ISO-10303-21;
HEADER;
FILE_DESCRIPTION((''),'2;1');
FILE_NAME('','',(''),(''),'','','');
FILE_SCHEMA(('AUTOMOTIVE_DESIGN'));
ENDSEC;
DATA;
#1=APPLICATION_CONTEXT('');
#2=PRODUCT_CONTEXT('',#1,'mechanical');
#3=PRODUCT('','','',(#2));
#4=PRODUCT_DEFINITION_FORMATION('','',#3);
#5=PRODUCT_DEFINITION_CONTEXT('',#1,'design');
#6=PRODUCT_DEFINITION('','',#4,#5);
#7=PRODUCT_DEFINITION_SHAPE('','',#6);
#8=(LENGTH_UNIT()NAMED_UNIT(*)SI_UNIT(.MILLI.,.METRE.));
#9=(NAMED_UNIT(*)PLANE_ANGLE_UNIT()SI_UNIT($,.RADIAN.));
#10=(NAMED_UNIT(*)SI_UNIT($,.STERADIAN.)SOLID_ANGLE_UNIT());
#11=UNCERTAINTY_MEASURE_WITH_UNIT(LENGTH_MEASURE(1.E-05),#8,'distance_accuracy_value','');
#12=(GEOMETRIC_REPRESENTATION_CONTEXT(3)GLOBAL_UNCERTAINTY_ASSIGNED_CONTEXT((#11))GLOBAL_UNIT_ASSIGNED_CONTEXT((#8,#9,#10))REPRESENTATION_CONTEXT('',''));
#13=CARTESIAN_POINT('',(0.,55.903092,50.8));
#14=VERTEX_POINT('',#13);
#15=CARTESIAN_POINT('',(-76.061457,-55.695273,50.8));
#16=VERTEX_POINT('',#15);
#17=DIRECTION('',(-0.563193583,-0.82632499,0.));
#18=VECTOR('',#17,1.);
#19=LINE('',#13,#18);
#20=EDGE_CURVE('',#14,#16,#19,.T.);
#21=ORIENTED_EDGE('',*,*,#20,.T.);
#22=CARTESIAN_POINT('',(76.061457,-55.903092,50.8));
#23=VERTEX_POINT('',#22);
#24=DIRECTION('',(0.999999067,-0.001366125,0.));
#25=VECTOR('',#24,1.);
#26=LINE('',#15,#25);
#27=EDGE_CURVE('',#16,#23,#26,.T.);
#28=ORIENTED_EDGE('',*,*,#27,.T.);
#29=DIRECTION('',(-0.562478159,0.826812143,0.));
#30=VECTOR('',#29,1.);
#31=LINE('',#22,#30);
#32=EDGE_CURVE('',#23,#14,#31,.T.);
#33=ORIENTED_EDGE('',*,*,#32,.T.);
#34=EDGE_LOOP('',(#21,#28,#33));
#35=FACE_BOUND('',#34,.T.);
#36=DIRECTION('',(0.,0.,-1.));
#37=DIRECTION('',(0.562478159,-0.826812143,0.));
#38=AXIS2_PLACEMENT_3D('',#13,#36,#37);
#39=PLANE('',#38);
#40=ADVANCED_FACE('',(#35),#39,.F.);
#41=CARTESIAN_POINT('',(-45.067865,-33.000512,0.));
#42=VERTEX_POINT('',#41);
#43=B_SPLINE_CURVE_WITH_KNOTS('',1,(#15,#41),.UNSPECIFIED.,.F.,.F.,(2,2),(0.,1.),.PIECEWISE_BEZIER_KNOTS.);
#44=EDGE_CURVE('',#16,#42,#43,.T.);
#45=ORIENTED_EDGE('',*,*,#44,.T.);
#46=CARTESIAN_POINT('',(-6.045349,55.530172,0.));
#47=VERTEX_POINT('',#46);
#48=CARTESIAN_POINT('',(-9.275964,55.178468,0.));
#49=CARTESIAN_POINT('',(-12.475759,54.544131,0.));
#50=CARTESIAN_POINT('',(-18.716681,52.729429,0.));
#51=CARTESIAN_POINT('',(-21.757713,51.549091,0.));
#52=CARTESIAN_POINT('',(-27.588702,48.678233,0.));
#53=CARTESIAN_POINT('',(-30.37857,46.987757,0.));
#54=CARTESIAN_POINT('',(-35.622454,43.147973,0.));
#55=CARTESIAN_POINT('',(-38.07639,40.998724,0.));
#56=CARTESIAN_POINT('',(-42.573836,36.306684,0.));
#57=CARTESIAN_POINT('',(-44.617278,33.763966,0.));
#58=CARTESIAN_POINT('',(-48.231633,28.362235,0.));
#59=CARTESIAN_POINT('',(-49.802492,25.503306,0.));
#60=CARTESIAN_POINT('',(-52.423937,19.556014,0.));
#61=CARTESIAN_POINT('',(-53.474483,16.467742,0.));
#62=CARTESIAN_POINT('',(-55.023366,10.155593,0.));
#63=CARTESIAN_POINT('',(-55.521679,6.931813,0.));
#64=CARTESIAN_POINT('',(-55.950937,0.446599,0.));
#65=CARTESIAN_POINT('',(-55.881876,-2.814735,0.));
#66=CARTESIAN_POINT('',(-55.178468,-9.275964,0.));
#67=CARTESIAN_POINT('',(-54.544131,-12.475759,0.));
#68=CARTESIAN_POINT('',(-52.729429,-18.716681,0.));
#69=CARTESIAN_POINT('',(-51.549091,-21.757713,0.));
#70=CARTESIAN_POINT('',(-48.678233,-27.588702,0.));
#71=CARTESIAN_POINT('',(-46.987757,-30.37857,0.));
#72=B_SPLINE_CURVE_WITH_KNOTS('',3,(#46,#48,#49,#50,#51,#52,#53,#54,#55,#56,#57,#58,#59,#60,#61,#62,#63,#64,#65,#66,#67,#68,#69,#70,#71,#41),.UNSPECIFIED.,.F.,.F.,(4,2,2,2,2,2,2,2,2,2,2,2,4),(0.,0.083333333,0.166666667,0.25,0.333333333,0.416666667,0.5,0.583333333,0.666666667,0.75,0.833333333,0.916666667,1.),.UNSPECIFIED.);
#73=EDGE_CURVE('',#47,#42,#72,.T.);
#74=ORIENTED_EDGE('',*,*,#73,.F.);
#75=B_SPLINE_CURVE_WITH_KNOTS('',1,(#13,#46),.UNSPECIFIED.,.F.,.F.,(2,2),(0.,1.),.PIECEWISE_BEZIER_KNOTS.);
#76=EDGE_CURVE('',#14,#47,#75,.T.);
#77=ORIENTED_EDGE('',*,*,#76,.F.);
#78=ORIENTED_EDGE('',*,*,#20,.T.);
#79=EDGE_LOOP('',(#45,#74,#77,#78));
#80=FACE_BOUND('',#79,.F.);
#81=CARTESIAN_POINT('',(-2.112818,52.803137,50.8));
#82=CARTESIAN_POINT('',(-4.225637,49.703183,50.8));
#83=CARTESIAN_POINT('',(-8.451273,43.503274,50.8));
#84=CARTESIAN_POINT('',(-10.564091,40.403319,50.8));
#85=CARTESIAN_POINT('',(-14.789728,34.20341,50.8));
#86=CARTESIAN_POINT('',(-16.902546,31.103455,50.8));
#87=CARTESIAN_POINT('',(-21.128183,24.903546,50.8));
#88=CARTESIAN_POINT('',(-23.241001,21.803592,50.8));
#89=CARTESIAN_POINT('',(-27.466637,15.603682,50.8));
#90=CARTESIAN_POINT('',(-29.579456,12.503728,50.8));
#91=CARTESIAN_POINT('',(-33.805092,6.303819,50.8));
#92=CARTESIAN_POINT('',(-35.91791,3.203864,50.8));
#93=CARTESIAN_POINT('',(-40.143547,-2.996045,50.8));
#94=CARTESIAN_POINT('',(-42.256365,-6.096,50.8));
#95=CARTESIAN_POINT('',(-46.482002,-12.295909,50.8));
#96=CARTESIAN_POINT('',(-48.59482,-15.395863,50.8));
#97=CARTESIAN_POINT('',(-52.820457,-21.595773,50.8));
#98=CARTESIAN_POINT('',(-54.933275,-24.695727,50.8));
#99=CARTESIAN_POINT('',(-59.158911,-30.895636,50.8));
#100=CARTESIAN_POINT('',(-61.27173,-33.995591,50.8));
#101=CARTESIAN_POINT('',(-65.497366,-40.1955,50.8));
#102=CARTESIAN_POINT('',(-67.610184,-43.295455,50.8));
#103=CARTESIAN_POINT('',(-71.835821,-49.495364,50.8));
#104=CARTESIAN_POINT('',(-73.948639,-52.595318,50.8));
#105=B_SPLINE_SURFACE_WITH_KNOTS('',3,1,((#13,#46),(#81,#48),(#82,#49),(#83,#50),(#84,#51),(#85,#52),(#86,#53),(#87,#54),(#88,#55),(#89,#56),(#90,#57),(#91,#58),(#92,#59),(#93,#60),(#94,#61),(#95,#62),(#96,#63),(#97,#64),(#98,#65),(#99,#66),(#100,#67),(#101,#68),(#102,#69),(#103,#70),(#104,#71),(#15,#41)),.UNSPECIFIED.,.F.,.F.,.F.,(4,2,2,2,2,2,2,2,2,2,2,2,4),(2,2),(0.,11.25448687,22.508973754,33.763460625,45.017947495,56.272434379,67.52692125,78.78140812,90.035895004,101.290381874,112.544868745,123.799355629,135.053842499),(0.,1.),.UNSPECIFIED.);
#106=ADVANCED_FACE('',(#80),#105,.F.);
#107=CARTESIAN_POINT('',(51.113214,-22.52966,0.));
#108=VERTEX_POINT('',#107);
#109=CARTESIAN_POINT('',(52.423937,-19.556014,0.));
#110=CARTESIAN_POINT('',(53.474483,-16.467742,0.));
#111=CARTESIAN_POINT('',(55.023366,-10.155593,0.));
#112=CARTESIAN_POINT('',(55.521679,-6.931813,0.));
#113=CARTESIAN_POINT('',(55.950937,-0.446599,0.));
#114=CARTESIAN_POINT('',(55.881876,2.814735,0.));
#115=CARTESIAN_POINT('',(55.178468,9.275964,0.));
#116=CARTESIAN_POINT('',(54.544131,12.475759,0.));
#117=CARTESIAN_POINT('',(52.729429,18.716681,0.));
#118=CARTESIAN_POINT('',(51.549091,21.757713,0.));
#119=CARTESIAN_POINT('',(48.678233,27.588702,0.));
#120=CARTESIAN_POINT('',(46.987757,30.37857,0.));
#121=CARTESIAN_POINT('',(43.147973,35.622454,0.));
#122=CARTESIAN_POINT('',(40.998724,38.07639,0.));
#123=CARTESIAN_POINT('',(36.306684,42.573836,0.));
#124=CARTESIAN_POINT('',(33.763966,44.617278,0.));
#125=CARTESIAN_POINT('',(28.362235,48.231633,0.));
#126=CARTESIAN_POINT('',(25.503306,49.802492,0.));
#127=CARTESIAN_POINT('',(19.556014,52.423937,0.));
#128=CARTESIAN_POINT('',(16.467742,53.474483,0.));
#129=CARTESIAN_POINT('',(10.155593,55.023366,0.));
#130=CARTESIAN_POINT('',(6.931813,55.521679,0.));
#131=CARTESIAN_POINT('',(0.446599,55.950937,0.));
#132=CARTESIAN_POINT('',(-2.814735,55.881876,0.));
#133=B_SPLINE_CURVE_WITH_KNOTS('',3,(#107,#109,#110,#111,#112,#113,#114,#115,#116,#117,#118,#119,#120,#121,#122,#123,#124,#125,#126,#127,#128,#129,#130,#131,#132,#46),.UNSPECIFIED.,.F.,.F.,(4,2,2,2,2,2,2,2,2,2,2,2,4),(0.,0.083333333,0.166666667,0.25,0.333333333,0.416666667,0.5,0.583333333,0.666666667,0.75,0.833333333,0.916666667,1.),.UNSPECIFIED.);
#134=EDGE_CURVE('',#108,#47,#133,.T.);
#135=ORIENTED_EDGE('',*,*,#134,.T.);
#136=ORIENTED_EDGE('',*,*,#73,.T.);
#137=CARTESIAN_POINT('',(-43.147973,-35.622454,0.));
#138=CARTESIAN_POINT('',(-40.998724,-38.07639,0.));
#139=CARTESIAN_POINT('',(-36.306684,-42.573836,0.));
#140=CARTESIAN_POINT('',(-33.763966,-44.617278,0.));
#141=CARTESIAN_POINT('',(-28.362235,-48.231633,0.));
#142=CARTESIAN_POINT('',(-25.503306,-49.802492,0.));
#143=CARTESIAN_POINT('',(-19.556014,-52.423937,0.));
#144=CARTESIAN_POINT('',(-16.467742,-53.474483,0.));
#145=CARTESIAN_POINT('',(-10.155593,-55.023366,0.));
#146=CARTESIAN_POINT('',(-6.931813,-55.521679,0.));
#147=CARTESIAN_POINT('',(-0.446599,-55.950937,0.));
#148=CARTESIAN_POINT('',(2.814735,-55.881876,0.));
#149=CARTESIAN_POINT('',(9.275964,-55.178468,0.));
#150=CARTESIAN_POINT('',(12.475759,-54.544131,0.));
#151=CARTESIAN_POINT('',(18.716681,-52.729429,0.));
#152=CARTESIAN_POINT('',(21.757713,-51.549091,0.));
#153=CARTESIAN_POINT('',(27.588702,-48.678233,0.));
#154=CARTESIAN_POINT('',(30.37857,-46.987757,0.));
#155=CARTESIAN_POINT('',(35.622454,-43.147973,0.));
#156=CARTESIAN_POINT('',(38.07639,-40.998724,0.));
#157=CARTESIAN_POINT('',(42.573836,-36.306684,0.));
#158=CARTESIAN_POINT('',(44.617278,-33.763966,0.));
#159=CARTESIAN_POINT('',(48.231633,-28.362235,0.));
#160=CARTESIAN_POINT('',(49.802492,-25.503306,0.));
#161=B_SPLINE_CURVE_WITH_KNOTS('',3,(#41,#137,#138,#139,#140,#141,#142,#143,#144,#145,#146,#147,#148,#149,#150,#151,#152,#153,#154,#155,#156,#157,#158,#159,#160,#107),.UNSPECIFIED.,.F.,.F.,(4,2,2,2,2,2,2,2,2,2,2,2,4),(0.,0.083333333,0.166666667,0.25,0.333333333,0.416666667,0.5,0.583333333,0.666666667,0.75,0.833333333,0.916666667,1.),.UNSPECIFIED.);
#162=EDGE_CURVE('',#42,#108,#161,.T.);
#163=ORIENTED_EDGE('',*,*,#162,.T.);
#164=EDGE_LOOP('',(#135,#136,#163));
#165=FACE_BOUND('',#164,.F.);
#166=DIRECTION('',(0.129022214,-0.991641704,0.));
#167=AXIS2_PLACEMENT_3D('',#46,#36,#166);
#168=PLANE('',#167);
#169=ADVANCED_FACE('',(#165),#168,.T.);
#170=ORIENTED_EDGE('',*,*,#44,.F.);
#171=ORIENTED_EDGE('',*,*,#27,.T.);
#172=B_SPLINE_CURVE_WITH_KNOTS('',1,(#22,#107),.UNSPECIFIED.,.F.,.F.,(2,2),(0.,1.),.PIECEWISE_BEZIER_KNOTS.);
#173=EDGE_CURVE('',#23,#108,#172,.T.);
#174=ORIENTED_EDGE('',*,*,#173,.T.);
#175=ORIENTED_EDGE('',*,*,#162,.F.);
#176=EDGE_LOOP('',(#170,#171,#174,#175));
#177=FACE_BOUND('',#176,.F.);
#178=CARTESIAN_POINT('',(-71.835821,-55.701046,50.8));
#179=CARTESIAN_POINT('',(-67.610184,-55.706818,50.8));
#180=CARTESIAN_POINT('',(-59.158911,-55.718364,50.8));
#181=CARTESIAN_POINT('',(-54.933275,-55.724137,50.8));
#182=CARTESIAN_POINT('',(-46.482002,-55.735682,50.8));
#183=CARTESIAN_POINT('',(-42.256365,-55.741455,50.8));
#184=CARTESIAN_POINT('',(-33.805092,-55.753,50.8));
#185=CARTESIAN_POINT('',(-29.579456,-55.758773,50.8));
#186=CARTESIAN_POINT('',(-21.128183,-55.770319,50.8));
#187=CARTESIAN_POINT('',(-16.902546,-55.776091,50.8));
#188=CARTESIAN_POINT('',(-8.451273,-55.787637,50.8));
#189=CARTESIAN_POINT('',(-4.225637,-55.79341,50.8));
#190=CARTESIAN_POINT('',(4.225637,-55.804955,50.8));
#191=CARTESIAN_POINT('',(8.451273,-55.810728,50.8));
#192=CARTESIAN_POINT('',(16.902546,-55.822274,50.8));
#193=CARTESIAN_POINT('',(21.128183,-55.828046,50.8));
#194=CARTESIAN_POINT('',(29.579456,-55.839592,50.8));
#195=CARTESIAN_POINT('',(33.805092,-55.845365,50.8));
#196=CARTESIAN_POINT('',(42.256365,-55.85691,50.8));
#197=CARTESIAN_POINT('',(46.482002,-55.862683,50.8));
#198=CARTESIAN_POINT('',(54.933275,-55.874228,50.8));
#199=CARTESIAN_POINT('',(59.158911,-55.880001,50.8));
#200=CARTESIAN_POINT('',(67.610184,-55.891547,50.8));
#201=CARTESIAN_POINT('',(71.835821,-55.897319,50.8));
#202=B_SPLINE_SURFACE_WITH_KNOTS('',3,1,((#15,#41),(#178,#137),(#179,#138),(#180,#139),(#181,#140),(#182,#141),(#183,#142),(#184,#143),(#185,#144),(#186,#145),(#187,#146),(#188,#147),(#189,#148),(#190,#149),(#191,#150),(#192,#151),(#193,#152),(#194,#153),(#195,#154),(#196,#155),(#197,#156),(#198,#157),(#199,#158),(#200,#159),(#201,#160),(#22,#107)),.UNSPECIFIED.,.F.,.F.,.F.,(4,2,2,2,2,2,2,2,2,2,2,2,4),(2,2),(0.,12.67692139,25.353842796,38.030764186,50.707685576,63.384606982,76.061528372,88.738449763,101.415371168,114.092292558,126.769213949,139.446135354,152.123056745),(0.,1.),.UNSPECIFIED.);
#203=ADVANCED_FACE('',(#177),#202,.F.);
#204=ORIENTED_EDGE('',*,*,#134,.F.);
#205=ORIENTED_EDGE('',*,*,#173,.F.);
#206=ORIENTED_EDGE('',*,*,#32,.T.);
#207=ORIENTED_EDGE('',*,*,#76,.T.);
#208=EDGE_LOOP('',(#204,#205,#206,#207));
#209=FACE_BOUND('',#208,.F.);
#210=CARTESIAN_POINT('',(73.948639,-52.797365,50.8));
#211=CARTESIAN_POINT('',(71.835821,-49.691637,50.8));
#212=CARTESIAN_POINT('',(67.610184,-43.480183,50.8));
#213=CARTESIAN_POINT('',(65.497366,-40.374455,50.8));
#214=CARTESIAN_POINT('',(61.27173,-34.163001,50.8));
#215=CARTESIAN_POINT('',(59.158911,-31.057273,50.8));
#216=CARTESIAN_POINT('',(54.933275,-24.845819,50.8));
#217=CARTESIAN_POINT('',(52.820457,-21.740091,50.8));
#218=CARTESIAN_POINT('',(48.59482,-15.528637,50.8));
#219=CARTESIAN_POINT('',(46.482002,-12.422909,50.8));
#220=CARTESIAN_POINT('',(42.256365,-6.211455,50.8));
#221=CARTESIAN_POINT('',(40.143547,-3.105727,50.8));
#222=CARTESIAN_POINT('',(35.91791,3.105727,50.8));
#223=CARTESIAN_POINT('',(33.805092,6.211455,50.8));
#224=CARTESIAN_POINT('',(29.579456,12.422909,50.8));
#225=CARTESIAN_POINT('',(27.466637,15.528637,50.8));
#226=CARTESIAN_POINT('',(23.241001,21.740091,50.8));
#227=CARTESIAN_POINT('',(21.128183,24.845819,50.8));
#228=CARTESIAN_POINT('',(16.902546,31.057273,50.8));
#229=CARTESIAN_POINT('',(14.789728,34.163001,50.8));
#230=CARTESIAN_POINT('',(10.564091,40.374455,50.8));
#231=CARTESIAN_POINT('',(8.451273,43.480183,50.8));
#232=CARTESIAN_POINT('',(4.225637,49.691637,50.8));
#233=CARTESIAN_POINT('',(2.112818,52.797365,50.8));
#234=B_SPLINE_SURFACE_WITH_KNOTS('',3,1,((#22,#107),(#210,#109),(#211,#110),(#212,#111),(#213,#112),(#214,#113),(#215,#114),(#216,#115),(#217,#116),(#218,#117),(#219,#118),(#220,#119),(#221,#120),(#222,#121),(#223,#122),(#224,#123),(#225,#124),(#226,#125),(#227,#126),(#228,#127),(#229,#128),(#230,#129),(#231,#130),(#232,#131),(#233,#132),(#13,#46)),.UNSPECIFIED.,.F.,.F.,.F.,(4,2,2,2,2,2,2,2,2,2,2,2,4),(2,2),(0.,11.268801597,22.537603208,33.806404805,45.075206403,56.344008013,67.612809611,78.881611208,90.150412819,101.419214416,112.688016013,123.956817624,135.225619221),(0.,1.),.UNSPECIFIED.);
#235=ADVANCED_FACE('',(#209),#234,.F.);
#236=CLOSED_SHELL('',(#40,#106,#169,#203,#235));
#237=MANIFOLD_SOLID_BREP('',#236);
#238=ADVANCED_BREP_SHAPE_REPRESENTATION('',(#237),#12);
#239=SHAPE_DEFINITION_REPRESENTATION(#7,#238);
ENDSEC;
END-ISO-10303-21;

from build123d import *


# Not quite as in the source:
# - the arcs of a loft's sections are written as splines that run evenly, so that the points pair up as in the source's solid


with BuildPart() as f3:
    # F2 (on offset) → F3 section 0
    with BuildSketch(Plane.XY.offset(50.8)):
        Polygon((0, 55.9030920267), (-76.0614573956, -55.6952729821), (76.0614573956, -55.9030920267), align=None)
    # F0 (on Top) → F3 section 1
    with BuildSketch(Plane.XY):
        with BuildLine():
            add(Edge.make_bspline(
                [(-45.0678651205, -33.0005121721), (-43.1479731463, -35.6224542827), (-40.9987241522, -38.0763897141), (-36.3066842111, -42.5738360658), (-33.7639657227, -44.6172775328), (-28.3622350481, -48.2316333835), (-25.5033062801, -49.8024919512), (-19.5560137252, -52.4239369272), (-16.4677417815, -53.4744828529), (-10.155592821, -55.0233656751), (-6.931813282, -55.5216786525), (-0.446599368, -55.9509373002), (2.8147348565, -55.8818763415), (9.2759637808, -55.1784680079), (12.4757587007, -54.5441314956), (18.716681464, -52.7294288869), (21.7577129298, -51.5490908148), (27.5887022521, -48.6782327515), (30.3785700614, -46.9877570947), (35.6224542827, -43.1479731463), (38.0763897141, -40.9987241522), (42.5738360658, -36.3066842111), (44.6172775328, -33.7639657227), (48.2316333835, -28.3622350481), (49.8024919512, -25.5033062801), (51.1132144392, -22.5296600026)],
                knots=[0, 0, 0, 0, 0.0833333333, 0.0833333333, 0.1666666667, 0.1666666667, 0.25, 0.25, 0.3333333333, 0.3333333333, 0.4166666667, 0.4166666667, 0.5, 0.5, 0.5833333333, 0.5833333333, 0.6666666667, 0.6666666667, 0.75, 0.75, 0.8333333333, 0.8333333333, 0.9166666667, 0.9166666667, 1, 1, 1, 1], degree=3))
            add(Edge.make_bspline(
                [(51.1132144392, -22.5296600026), (52.4239369272, -19.5560137252), (53.4744828529, -16.4677417815), (55.0233656751, -10.155592821), (55.5216786525, -6.931813282), (55.9509373002, -0.446599368), (55.8818763415, 2.8147348565), (55.1784680079, 9.2759637808), (54.5441314956, 12.4757587007), (52.7294288869, 18.716681464), (51.5490908148, 21.7577129298), (48.6782327515, 27.5887022521), (46.9877570947, 30.3785700614), (43.1479731463, 35.6224542827), (40.9987241522, 38.0763897141), (36.3066842111, 42.5738360658), (33.7639657227, 44.6172775328), (28.3622350481, 48.2316333835), (25.5033062801, 49.8024919512), (19.5560137252, 52.4239369272), (16.4677417815, 53.4744828529), (10.155592821, 55.0233656751), (6.931813282, 55.5216786525), (0.446599368, 55.9509373002), (-2.8147348565, 55.8818763415), (-6.0453493187, 55.5301721747)],
                knots=[0, 0, 0, 0, 0.0833333333, 0.0833333333, 0.1666666667, 0.1666666667, 0.25, 0.25, 0.3333333333, 0.3333333333, 0.4166666667, 0.4166666667, 0.5, 0.5, 0.5833333333, 0.5833333333, 0.6666666667, 0.6666666667, 0.75, 0.75, 0.8333333333, 0.8333333333, 0.9166666667, 0.9166666667, 1, 1, 1, 1], degree=3))
            add(Edge.make_bspline(
                [(-6.0453493187, 55.5301721747), (-9.2759637808, 55.1784680079), (-12.4757587007, 54.5441314956), (-18.716681464, 52.7294288869), (-21.7577129298, 51.5490908148), (-27.5887022521, 48.6782327515), (-30.3785700614, 46.9877570947), (-35.6224542827, 43.1479731463), (-38.0763897141, 40.9987241522), (-42.5738360658, 36.3066842111), (-44.6172775328, 33.7639657227), (-48.2316333835, 28.3622350481), (-49.8024919512, 25.5033062801), (-52.4239369272, 19.5560137252), (-53.4744828529, 16.4677417815), (-55.0233656751, 10.155592821), (-55.5216786525, 6.931813282), (-55.9509373002, 0.446599368), (-55.8818763415, -2.8147348565), (-55.1784680079, -9.2759637808), (-54.5441314956, -12.4757587007), (-52.7294288869, -18.716681464), (-51.5490908148, -21.7577129298), (-48.6782327515, -27.5887022521), (-46.9877570947, -30.3785700614), (-45.0678651205, -33.0005121721)],
                knots=[0, 0, 0, 0, 0.0833333333, 0.0833333333, 0.1666666667, 0.1666666667, 0.25, 0.25, 0.3333333333, 0.3333333333, 0.4166666667, 0.4166666667, 0.5, 0.5, 0.5833333333, 0.5833333333, 0.6666666667, 0.6666666667, 0.75, 0.75, 0.8333333333, 0.8333333333, 0.9166666667, 0.9166666667, 1, 1, 1, 1], degree=3))
        make_face()
    loft(ruled=True)


solid = f3.part
